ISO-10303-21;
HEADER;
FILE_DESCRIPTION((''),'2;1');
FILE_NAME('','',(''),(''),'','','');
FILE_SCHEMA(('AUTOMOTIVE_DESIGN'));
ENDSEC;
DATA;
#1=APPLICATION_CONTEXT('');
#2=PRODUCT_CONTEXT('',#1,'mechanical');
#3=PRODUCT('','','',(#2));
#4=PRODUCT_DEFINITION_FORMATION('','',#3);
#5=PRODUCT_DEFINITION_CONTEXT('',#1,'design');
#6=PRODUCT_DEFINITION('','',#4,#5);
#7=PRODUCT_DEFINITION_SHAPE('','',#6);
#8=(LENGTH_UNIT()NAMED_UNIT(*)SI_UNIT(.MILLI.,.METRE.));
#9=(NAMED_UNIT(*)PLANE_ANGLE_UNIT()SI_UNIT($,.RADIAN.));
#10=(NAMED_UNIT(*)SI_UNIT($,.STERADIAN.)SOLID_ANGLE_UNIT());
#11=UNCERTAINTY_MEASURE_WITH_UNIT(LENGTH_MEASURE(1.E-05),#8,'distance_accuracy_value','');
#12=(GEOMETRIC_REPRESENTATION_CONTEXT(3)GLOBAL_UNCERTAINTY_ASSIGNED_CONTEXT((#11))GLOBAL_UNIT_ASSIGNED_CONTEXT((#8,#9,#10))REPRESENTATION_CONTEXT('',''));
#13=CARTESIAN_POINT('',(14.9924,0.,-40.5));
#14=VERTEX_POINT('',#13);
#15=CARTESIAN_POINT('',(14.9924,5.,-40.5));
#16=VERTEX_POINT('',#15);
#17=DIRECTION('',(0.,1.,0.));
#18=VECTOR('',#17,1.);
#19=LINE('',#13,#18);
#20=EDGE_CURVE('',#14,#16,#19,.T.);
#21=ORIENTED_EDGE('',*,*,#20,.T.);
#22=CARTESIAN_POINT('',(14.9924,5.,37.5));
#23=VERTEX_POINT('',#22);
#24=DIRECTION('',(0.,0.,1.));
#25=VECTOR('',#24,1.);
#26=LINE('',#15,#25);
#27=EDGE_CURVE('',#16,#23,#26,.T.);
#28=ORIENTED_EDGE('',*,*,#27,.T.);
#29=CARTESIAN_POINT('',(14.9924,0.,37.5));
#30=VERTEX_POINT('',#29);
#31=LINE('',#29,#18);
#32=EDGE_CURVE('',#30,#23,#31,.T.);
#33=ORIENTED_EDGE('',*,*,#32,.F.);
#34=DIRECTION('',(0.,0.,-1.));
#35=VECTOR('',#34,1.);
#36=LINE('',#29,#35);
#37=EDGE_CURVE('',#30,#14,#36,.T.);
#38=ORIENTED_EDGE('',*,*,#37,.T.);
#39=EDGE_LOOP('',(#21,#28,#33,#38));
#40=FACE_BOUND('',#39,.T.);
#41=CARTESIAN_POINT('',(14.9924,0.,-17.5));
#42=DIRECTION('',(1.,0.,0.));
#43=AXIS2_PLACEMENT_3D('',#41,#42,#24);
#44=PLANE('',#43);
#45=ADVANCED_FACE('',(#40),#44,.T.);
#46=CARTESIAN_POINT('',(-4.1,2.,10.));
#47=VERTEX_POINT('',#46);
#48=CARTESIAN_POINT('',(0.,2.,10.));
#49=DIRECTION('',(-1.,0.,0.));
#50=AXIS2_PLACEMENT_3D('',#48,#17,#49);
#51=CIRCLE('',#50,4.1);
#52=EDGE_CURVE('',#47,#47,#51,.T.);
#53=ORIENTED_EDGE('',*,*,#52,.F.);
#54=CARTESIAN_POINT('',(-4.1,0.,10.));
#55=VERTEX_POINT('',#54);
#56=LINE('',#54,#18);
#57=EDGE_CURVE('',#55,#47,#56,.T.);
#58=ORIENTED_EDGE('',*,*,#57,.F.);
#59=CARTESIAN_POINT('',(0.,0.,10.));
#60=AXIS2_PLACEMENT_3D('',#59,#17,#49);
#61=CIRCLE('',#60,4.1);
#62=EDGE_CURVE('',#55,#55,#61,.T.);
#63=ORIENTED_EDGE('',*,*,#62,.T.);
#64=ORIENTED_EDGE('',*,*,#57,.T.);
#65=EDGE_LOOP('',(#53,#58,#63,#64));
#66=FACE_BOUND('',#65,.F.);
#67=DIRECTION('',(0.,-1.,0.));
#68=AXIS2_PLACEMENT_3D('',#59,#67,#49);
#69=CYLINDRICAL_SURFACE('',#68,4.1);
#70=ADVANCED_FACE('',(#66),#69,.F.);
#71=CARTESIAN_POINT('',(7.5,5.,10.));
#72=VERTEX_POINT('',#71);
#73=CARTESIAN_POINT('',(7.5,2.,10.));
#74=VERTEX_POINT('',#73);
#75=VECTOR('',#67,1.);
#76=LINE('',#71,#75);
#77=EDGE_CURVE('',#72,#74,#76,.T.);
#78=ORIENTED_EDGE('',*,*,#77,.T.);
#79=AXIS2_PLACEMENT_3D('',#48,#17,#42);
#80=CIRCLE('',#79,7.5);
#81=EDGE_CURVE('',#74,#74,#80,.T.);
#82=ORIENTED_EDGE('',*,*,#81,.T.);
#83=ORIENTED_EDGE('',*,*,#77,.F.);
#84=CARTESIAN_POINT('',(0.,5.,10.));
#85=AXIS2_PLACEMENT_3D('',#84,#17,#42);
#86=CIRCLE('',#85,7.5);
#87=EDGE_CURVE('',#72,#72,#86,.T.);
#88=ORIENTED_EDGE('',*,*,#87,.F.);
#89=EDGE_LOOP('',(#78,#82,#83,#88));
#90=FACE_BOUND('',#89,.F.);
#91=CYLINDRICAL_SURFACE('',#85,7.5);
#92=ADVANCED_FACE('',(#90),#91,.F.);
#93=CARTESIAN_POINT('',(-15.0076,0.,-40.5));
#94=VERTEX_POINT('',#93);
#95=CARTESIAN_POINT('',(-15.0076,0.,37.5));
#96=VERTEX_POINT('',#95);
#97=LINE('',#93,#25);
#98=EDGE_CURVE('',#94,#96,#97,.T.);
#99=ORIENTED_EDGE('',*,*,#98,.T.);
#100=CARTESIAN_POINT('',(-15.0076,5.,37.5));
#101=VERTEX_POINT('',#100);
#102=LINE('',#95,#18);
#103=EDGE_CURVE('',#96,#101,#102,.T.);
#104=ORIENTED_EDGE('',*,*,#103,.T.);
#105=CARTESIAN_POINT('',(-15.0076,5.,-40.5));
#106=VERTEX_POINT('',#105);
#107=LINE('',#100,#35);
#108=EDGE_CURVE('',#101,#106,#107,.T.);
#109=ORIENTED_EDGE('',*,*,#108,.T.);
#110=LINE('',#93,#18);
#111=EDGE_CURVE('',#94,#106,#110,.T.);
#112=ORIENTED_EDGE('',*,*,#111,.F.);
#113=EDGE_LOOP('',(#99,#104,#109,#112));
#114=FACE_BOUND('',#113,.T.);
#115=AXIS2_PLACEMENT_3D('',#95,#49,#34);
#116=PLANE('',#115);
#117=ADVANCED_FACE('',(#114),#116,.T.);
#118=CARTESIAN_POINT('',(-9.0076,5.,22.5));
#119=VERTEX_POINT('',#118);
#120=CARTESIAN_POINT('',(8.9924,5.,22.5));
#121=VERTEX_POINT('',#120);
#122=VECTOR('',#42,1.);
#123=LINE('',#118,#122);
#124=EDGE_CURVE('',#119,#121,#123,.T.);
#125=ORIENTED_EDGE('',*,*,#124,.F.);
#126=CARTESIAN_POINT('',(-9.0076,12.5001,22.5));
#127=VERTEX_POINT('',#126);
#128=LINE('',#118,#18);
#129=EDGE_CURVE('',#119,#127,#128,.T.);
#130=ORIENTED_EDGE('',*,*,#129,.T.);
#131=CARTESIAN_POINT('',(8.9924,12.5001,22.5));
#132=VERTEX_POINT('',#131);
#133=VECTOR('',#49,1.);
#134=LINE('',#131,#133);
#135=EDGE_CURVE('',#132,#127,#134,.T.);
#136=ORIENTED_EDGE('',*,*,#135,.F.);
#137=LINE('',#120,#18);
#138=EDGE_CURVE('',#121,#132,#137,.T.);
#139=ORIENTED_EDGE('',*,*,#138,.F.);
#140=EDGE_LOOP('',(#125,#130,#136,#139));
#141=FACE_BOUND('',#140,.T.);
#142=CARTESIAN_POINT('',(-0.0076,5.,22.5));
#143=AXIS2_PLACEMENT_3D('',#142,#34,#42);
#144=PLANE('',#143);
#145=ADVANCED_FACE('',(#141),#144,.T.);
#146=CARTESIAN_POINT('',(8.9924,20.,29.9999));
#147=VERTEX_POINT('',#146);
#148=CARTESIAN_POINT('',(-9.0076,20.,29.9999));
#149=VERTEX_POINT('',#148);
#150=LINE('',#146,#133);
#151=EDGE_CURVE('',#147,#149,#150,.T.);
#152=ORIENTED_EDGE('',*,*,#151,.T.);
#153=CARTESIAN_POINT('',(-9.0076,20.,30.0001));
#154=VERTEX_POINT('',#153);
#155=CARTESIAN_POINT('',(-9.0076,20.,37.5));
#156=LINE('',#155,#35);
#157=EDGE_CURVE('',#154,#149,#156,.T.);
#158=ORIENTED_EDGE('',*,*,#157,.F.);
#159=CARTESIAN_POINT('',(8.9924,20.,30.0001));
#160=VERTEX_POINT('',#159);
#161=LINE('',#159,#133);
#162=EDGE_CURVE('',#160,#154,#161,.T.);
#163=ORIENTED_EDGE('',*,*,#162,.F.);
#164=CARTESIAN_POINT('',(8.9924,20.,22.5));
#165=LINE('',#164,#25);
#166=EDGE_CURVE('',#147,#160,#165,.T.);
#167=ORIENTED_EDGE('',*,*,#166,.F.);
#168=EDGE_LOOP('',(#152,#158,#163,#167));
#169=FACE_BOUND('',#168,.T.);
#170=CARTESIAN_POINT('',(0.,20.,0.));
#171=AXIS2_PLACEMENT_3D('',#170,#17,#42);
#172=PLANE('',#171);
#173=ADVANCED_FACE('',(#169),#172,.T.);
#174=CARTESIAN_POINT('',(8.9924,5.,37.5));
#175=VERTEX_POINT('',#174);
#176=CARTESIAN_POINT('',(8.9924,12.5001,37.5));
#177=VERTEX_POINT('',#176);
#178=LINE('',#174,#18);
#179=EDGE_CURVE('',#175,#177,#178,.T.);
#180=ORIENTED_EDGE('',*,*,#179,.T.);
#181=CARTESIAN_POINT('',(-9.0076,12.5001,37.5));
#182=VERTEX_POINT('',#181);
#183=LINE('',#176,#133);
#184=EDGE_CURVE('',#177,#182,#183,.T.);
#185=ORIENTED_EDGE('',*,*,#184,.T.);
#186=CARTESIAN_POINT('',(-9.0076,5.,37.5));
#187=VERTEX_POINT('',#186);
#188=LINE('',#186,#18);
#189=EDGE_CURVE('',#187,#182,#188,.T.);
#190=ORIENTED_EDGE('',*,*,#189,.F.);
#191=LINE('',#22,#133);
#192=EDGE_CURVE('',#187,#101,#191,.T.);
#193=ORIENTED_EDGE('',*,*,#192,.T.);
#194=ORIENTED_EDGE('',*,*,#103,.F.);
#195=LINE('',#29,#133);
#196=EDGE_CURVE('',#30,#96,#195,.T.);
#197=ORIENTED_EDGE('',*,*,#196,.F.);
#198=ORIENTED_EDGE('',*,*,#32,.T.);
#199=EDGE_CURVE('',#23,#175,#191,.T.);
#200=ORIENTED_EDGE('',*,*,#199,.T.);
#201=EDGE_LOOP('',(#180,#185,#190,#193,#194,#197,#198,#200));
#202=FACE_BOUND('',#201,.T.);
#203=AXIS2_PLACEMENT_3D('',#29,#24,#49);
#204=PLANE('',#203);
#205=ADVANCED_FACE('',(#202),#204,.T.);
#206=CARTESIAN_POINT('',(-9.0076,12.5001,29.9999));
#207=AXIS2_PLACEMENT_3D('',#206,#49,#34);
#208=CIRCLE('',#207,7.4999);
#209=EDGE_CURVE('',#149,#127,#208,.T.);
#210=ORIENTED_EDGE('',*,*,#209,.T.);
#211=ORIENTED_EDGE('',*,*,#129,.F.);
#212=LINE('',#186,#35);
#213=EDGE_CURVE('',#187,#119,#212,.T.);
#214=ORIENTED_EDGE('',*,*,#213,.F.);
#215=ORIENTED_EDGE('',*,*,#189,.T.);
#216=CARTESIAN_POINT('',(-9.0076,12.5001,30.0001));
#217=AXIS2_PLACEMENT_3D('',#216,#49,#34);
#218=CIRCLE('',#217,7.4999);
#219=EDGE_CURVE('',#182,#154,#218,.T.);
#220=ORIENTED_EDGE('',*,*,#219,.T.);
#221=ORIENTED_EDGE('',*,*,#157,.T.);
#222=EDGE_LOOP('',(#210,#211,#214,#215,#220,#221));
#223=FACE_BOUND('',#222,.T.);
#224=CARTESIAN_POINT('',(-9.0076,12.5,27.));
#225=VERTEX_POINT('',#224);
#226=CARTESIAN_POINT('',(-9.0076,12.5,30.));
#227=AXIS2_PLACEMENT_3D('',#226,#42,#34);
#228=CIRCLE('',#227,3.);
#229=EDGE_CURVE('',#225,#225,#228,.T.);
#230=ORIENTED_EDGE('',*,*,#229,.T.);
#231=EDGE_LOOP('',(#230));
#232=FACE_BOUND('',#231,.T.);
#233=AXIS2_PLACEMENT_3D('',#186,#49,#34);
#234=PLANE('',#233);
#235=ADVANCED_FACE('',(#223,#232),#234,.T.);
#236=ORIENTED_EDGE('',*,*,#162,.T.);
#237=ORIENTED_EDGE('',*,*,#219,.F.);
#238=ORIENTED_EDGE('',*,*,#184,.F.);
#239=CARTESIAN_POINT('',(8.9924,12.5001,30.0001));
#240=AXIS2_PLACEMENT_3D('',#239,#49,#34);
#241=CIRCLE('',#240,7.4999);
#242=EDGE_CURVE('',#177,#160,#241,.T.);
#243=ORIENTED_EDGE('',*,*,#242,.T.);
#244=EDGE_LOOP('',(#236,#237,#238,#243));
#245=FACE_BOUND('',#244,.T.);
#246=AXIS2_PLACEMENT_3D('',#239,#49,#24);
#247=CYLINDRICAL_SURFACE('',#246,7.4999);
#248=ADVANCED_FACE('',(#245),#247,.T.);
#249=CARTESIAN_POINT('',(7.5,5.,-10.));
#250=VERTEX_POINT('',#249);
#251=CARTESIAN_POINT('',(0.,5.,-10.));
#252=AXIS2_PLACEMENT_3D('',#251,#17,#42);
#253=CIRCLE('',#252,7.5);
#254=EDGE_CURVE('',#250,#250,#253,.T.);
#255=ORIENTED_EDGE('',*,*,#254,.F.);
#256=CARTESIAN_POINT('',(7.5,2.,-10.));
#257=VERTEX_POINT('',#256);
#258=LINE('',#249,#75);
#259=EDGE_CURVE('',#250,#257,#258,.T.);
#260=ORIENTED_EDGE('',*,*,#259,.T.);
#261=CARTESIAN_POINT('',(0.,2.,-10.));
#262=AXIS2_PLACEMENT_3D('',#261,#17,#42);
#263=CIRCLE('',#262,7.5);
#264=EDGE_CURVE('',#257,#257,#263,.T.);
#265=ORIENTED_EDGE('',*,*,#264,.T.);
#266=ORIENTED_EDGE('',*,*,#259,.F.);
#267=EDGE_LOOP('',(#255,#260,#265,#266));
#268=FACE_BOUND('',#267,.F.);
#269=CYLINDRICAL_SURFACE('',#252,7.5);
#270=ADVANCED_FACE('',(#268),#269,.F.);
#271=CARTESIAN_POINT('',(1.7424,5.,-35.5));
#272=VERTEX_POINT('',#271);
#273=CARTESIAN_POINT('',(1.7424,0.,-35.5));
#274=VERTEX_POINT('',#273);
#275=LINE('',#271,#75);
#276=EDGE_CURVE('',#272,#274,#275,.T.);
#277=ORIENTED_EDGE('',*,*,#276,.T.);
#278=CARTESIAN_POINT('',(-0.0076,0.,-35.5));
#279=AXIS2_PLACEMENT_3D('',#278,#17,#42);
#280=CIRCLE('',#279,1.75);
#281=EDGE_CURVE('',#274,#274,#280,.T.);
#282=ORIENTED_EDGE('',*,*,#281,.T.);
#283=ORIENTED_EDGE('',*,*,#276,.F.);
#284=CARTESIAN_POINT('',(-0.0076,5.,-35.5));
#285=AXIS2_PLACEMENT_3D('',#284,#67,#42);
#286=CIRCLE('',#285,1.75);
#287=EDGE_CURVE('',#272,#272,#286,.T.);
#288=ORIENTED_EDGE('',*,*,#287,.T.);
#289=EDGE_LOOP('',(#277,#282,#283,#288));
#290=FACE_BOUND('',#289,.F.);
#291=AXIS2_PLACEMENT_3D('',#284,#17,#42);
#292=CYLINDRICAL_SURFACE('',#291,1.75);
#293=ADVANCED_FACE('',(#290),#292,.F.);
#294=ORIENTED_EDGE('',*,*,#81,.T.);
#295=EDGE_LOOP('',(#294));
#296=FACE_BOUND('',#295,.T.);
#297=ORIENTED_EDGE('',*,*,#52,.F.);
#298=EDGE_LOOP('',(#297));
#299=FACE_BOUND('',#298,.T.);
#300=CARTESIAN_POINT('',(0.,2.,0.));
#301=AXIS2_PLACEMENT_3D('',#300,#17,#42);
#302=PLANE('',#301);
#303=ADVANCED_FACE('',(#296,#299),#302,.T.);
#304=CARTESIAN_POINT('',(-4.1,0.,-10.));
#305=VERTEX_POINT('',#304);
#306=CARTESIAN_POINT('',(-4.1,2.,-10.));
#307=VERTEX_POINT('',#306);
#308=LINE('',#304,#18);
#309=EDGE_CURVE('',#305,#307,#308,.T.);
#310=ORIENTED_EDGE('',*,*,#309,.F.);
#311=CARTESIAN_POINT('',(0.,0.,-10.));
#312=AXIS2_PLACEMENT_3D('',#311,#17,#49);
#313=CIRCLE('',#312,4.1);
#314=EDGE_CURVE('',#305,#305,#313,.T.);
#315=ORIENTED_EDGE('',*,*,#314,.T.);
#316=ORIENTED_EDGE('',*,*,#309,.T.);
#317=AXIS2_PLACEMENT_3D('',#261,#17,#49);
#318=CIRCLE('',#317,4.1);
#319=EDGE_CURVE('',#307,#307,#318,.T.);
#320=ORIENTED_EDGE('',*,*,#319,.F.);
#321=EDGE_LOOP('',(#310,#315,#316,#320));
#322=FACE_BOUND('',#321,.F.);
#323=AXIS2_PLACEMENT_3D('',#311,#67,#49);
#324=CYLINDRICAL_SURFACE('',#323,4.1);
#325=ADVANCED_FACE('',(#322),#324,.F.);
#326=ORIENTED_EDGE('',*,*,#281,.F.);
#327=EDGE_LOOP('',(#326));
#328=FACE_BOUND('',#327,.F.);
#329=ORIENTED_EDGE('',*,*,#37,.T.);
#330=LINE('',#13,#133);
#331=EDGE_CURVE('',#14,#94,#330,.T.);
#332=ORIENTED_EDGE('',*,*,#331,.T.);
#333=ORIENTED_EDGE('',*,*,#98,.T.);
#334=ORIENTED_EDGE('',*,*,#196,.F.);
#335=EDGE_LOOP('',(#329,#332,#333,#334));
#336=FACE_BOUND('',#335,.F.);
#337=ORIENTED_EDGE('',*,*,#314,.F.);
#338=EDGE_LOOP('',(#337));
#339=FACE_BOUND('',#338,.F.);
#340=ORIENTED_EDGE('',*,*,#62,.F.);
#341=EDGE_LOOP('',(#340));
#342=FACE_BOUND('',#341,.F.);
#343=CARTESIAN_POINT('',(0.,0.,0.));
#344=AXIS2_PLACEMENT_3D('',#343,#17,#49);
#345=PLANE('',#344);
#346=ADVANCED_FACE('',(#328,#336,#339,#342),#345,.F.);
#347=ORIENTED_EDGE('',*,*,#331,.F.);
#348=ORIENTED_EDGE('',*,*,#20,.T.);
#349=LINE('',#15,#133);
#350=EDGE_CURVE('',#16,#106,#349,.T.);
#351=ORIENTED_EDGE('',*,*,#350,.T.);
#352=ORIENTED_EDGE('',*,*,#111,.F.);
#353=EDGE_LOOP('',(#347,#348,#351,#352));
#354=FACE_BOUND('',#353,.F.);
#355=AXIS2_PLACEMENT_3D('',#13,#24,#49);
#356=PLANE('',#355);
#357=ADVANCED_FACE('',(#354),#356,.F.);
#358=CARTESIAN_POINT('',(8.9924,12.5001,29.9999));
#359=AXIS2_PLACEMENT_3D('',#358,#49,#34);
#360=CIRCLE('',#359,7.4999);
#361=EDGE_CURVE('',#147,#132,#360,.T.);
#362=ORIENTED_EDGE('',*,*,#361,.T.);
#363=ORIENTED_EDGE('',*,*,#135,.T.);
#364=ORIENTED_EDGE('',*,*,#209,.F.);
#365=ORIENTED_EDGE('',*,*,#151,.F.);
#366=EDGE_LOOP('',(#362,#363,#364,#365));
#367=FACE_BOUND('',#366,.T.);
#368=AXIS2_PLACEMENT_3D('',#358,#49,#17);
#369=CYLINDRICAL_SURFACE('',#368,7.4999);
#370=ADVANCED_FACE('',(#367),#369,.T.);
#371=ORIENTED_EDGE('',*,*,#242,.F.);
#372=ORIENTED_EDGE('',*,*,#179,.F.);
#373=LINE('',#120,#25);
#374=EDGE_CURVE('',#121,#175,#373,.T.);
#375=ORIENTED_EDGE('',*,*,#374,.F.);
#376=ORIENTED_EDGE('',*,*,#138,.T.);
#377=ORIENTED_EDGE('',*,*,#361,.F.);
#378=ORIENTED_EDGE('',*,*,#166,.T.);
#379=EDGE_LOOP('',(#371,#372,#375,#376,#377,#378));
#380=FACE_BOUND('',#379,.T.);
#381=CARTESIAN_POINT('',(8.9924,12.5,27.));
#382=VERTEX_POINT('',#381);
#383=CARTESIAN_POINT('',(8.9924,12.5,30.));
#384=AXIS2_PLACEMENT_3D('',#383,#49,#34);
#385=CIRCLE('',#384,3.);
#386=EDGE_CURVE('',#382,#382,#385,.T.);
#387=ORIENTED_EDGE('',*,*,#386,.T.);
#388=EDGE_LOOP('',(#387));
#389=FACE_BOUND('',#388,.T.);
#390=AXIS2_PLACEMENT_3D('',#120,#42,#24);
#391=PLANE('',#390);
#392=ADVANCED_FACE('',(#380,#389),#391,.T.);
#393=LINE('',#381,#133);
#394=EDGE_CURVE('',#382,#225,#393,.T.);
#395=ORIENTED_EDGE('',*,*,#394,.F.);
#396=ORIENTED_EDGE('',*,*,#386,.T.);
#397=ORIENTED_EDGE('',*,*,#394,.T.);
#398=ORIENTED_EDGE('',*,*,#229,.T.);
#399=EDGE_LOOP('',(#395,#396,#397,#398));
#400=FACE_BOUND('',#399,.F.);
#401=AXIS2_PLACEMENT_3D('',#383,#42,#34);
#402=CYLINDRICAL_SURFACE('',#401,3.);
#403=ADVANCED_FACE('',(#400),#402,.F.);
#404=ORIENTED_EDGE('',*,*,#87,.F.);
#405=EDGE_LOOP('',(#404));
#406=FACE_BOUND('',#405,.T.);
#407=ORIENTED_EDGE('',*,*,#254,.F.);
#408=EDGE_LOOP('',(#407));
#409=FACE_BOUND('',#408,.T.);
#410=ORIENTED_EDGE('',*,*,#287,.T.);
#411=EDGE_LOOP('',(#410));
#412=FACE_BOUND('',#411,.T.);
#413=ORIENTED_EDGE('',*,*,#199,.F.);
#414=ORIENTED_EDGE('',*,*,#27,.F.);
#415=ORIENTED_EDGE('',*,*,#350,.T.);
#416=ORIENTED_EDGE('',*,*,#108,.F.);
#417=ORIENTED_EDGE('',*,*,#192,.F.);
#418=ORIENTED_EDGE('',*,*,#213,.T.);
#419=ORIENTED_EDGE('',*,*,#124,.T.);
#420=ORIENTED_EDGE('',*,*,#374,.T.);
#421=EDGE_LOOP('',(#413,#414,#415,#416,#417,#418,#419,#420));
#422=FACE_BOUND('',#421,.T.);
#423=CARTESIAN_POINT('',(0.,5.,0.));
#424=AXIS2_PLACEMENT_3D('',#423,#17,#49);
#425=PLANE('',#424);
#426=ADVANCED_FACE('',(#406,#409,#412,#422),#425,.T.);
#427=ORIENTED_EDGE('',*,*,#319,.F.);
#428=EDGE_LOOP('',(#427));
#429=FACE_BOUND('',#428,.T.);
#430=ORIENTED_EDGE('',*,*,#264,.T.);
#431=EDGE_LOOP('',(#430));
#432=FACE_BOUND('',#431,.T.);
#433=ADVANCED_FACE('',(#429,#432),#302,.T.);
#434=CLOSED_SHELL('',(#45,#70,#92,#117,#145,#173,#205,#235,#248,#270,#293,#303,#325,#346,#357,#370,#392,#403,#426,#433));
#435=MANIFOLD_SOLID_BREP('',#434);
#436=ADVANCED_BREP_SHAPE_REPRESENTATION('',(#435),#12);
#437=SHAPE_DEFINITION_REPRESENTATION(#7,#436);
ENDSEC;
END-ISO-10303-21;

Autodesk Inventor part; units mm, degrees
ref_plane "YZ Plane" through (0, 0, 0) normal (1, 0, 0) x (0, 1, 0)
ref_plane "XZ Plane" through (0, 0, 0) normal (0, 1, 0) x (-1, 0, 0)
ref_plane "XY Plane" through (0, 0, 0) normal (0, 0, 1) x (1, 0, 0)
sketch "Эскиз1" plane through (0, 0, 0) normal (0, 1, 0) x (-1, 0, 0)
  line L0 (-14.9924, 37.5) -> (15.0076, 37.5)
  line L1 (15.0076, 37.5) -> (15.0076, -17.5)
  line L2 (15.0076, -17.5) -> (-14.9924, -17.5)
  line L3 (-14.9924, -17.5) -> (-14.9924, 37.5)
  circle A0 centre (0, -10) radius 4.1
  circle A1 centre (0, 10) radius 4.1
  line L4 (15.0076, -17.5) -> (-14.9924, -17.5)
  line L5 (-14.9924, -17.5) -> (-14.9924, -40.5)
  line L6 (-14.9924, -40.5) -> (15.0076, -40.5)
  line L7 (15.0076, -40.5) -> (15.0076, -17.5)
  point P0 (0, 0)
  dimension "d0" = 30
  dimension "d1" = 55
  dimension "d2" = 8.2
  dimension "d3" = 8.2
  dimension "d4" = 10
  dimension "d5" = 10
  dimension "d11" = 23
extrude "Выдавливание1" add sketch "Эскиз1" along normal blind 5
sketch "Эскиз4" plane through (0, 5, 0) normal (0, 1, 0) x (1, 0, 0)
  line L0 (14.9924, -37.5) -> (-15.0076, -37.5) projected
  line L1 (-0.0076, -37.5) -> (-0.0076, -22.5)
  line L2 (8.9924, -37.5) -> (-9.0076, -37.5)
  line L3 (-9.0076, -37.5) -> (-9.0076, -22.5)
  line L4 (-9.0076, -22.5) -> (8.9924, -22.5)
  line L5 (8.9924, -22.5) -> (8.9924, -37.5)
  line L6 (8.9924, -37.5) -> (-9.0076, -22.5) construction
  line L7 (-9.0076, -37.5) -> (8.9924, -22.5) construction
  point P0 (0, 0)
  point P1 (-0.0076, -30)
  dimension "d19" = 15
  dimension "d20" = 18
  dimension "d21" = 15
extrude "Выдавливание4" add sketch "Эскиз4" along normal blind 15
sketch "Эскиз5" plane through (8.9924, 5, 37.5) normal (1, 0, 0) x (0, 0, -1)
  line L0 (0, 15) -> (15, 15) projected
  line L1 (7.5, 15) -> (7.5, 0)
  line L2 (78, 0) -> (0, 0) projected
  circle A0 centre (7.5, 7.5) radius 3
  point P0 (37.5, -5)
  dimension "d24" = 6
extrude "Выдавливание5" cut sketch "Эскиз5" against normal blind 20
fillet "Сопряжение1" radius 7.5 2 edges at (-0.0076, 20, 22.5) (-0.0076, 20, 37.5)
sketch "Эскиз6" plane through (0, 5, 0) normal (0, 1, 0) x (1, 0, 0)
  line L0 (14.9924, 40.5) -> (-15.0076, 40.5) projected
  line L1 (-0.0076, 40.5) -> (-0.0076, 35.5)
  circle A0 centre (-0.0076, 35.5) radius 1.75
  point P0 (0, 0)
  dimension "d28" = 5
  dimension "d29" = 3.5
extrude "Выдавливание6" cut sketch "Эскиз6" against normal blind 15
sketch "Эскиз7" plane through (0, 5, 0) normal (0, 1, 0) x (1, 0, 0)
  circle A0 centre (0, -10) radius 4.1 projected
  circle A1 centre (0, -10) radius 7.5
  circle A2 centre (0, 10) radius 4.1 projected
  circle A3 centre (0, 10) radius 7.5
  point P0 (0, 0)
  dimension "d32" = 15
  dimension "d33" = 15
extrude "Выдавливание7" cut sketch "Эскиз7" against normal blind 3
properties part number "КВ33.044.601 - Опора держателя катка"
